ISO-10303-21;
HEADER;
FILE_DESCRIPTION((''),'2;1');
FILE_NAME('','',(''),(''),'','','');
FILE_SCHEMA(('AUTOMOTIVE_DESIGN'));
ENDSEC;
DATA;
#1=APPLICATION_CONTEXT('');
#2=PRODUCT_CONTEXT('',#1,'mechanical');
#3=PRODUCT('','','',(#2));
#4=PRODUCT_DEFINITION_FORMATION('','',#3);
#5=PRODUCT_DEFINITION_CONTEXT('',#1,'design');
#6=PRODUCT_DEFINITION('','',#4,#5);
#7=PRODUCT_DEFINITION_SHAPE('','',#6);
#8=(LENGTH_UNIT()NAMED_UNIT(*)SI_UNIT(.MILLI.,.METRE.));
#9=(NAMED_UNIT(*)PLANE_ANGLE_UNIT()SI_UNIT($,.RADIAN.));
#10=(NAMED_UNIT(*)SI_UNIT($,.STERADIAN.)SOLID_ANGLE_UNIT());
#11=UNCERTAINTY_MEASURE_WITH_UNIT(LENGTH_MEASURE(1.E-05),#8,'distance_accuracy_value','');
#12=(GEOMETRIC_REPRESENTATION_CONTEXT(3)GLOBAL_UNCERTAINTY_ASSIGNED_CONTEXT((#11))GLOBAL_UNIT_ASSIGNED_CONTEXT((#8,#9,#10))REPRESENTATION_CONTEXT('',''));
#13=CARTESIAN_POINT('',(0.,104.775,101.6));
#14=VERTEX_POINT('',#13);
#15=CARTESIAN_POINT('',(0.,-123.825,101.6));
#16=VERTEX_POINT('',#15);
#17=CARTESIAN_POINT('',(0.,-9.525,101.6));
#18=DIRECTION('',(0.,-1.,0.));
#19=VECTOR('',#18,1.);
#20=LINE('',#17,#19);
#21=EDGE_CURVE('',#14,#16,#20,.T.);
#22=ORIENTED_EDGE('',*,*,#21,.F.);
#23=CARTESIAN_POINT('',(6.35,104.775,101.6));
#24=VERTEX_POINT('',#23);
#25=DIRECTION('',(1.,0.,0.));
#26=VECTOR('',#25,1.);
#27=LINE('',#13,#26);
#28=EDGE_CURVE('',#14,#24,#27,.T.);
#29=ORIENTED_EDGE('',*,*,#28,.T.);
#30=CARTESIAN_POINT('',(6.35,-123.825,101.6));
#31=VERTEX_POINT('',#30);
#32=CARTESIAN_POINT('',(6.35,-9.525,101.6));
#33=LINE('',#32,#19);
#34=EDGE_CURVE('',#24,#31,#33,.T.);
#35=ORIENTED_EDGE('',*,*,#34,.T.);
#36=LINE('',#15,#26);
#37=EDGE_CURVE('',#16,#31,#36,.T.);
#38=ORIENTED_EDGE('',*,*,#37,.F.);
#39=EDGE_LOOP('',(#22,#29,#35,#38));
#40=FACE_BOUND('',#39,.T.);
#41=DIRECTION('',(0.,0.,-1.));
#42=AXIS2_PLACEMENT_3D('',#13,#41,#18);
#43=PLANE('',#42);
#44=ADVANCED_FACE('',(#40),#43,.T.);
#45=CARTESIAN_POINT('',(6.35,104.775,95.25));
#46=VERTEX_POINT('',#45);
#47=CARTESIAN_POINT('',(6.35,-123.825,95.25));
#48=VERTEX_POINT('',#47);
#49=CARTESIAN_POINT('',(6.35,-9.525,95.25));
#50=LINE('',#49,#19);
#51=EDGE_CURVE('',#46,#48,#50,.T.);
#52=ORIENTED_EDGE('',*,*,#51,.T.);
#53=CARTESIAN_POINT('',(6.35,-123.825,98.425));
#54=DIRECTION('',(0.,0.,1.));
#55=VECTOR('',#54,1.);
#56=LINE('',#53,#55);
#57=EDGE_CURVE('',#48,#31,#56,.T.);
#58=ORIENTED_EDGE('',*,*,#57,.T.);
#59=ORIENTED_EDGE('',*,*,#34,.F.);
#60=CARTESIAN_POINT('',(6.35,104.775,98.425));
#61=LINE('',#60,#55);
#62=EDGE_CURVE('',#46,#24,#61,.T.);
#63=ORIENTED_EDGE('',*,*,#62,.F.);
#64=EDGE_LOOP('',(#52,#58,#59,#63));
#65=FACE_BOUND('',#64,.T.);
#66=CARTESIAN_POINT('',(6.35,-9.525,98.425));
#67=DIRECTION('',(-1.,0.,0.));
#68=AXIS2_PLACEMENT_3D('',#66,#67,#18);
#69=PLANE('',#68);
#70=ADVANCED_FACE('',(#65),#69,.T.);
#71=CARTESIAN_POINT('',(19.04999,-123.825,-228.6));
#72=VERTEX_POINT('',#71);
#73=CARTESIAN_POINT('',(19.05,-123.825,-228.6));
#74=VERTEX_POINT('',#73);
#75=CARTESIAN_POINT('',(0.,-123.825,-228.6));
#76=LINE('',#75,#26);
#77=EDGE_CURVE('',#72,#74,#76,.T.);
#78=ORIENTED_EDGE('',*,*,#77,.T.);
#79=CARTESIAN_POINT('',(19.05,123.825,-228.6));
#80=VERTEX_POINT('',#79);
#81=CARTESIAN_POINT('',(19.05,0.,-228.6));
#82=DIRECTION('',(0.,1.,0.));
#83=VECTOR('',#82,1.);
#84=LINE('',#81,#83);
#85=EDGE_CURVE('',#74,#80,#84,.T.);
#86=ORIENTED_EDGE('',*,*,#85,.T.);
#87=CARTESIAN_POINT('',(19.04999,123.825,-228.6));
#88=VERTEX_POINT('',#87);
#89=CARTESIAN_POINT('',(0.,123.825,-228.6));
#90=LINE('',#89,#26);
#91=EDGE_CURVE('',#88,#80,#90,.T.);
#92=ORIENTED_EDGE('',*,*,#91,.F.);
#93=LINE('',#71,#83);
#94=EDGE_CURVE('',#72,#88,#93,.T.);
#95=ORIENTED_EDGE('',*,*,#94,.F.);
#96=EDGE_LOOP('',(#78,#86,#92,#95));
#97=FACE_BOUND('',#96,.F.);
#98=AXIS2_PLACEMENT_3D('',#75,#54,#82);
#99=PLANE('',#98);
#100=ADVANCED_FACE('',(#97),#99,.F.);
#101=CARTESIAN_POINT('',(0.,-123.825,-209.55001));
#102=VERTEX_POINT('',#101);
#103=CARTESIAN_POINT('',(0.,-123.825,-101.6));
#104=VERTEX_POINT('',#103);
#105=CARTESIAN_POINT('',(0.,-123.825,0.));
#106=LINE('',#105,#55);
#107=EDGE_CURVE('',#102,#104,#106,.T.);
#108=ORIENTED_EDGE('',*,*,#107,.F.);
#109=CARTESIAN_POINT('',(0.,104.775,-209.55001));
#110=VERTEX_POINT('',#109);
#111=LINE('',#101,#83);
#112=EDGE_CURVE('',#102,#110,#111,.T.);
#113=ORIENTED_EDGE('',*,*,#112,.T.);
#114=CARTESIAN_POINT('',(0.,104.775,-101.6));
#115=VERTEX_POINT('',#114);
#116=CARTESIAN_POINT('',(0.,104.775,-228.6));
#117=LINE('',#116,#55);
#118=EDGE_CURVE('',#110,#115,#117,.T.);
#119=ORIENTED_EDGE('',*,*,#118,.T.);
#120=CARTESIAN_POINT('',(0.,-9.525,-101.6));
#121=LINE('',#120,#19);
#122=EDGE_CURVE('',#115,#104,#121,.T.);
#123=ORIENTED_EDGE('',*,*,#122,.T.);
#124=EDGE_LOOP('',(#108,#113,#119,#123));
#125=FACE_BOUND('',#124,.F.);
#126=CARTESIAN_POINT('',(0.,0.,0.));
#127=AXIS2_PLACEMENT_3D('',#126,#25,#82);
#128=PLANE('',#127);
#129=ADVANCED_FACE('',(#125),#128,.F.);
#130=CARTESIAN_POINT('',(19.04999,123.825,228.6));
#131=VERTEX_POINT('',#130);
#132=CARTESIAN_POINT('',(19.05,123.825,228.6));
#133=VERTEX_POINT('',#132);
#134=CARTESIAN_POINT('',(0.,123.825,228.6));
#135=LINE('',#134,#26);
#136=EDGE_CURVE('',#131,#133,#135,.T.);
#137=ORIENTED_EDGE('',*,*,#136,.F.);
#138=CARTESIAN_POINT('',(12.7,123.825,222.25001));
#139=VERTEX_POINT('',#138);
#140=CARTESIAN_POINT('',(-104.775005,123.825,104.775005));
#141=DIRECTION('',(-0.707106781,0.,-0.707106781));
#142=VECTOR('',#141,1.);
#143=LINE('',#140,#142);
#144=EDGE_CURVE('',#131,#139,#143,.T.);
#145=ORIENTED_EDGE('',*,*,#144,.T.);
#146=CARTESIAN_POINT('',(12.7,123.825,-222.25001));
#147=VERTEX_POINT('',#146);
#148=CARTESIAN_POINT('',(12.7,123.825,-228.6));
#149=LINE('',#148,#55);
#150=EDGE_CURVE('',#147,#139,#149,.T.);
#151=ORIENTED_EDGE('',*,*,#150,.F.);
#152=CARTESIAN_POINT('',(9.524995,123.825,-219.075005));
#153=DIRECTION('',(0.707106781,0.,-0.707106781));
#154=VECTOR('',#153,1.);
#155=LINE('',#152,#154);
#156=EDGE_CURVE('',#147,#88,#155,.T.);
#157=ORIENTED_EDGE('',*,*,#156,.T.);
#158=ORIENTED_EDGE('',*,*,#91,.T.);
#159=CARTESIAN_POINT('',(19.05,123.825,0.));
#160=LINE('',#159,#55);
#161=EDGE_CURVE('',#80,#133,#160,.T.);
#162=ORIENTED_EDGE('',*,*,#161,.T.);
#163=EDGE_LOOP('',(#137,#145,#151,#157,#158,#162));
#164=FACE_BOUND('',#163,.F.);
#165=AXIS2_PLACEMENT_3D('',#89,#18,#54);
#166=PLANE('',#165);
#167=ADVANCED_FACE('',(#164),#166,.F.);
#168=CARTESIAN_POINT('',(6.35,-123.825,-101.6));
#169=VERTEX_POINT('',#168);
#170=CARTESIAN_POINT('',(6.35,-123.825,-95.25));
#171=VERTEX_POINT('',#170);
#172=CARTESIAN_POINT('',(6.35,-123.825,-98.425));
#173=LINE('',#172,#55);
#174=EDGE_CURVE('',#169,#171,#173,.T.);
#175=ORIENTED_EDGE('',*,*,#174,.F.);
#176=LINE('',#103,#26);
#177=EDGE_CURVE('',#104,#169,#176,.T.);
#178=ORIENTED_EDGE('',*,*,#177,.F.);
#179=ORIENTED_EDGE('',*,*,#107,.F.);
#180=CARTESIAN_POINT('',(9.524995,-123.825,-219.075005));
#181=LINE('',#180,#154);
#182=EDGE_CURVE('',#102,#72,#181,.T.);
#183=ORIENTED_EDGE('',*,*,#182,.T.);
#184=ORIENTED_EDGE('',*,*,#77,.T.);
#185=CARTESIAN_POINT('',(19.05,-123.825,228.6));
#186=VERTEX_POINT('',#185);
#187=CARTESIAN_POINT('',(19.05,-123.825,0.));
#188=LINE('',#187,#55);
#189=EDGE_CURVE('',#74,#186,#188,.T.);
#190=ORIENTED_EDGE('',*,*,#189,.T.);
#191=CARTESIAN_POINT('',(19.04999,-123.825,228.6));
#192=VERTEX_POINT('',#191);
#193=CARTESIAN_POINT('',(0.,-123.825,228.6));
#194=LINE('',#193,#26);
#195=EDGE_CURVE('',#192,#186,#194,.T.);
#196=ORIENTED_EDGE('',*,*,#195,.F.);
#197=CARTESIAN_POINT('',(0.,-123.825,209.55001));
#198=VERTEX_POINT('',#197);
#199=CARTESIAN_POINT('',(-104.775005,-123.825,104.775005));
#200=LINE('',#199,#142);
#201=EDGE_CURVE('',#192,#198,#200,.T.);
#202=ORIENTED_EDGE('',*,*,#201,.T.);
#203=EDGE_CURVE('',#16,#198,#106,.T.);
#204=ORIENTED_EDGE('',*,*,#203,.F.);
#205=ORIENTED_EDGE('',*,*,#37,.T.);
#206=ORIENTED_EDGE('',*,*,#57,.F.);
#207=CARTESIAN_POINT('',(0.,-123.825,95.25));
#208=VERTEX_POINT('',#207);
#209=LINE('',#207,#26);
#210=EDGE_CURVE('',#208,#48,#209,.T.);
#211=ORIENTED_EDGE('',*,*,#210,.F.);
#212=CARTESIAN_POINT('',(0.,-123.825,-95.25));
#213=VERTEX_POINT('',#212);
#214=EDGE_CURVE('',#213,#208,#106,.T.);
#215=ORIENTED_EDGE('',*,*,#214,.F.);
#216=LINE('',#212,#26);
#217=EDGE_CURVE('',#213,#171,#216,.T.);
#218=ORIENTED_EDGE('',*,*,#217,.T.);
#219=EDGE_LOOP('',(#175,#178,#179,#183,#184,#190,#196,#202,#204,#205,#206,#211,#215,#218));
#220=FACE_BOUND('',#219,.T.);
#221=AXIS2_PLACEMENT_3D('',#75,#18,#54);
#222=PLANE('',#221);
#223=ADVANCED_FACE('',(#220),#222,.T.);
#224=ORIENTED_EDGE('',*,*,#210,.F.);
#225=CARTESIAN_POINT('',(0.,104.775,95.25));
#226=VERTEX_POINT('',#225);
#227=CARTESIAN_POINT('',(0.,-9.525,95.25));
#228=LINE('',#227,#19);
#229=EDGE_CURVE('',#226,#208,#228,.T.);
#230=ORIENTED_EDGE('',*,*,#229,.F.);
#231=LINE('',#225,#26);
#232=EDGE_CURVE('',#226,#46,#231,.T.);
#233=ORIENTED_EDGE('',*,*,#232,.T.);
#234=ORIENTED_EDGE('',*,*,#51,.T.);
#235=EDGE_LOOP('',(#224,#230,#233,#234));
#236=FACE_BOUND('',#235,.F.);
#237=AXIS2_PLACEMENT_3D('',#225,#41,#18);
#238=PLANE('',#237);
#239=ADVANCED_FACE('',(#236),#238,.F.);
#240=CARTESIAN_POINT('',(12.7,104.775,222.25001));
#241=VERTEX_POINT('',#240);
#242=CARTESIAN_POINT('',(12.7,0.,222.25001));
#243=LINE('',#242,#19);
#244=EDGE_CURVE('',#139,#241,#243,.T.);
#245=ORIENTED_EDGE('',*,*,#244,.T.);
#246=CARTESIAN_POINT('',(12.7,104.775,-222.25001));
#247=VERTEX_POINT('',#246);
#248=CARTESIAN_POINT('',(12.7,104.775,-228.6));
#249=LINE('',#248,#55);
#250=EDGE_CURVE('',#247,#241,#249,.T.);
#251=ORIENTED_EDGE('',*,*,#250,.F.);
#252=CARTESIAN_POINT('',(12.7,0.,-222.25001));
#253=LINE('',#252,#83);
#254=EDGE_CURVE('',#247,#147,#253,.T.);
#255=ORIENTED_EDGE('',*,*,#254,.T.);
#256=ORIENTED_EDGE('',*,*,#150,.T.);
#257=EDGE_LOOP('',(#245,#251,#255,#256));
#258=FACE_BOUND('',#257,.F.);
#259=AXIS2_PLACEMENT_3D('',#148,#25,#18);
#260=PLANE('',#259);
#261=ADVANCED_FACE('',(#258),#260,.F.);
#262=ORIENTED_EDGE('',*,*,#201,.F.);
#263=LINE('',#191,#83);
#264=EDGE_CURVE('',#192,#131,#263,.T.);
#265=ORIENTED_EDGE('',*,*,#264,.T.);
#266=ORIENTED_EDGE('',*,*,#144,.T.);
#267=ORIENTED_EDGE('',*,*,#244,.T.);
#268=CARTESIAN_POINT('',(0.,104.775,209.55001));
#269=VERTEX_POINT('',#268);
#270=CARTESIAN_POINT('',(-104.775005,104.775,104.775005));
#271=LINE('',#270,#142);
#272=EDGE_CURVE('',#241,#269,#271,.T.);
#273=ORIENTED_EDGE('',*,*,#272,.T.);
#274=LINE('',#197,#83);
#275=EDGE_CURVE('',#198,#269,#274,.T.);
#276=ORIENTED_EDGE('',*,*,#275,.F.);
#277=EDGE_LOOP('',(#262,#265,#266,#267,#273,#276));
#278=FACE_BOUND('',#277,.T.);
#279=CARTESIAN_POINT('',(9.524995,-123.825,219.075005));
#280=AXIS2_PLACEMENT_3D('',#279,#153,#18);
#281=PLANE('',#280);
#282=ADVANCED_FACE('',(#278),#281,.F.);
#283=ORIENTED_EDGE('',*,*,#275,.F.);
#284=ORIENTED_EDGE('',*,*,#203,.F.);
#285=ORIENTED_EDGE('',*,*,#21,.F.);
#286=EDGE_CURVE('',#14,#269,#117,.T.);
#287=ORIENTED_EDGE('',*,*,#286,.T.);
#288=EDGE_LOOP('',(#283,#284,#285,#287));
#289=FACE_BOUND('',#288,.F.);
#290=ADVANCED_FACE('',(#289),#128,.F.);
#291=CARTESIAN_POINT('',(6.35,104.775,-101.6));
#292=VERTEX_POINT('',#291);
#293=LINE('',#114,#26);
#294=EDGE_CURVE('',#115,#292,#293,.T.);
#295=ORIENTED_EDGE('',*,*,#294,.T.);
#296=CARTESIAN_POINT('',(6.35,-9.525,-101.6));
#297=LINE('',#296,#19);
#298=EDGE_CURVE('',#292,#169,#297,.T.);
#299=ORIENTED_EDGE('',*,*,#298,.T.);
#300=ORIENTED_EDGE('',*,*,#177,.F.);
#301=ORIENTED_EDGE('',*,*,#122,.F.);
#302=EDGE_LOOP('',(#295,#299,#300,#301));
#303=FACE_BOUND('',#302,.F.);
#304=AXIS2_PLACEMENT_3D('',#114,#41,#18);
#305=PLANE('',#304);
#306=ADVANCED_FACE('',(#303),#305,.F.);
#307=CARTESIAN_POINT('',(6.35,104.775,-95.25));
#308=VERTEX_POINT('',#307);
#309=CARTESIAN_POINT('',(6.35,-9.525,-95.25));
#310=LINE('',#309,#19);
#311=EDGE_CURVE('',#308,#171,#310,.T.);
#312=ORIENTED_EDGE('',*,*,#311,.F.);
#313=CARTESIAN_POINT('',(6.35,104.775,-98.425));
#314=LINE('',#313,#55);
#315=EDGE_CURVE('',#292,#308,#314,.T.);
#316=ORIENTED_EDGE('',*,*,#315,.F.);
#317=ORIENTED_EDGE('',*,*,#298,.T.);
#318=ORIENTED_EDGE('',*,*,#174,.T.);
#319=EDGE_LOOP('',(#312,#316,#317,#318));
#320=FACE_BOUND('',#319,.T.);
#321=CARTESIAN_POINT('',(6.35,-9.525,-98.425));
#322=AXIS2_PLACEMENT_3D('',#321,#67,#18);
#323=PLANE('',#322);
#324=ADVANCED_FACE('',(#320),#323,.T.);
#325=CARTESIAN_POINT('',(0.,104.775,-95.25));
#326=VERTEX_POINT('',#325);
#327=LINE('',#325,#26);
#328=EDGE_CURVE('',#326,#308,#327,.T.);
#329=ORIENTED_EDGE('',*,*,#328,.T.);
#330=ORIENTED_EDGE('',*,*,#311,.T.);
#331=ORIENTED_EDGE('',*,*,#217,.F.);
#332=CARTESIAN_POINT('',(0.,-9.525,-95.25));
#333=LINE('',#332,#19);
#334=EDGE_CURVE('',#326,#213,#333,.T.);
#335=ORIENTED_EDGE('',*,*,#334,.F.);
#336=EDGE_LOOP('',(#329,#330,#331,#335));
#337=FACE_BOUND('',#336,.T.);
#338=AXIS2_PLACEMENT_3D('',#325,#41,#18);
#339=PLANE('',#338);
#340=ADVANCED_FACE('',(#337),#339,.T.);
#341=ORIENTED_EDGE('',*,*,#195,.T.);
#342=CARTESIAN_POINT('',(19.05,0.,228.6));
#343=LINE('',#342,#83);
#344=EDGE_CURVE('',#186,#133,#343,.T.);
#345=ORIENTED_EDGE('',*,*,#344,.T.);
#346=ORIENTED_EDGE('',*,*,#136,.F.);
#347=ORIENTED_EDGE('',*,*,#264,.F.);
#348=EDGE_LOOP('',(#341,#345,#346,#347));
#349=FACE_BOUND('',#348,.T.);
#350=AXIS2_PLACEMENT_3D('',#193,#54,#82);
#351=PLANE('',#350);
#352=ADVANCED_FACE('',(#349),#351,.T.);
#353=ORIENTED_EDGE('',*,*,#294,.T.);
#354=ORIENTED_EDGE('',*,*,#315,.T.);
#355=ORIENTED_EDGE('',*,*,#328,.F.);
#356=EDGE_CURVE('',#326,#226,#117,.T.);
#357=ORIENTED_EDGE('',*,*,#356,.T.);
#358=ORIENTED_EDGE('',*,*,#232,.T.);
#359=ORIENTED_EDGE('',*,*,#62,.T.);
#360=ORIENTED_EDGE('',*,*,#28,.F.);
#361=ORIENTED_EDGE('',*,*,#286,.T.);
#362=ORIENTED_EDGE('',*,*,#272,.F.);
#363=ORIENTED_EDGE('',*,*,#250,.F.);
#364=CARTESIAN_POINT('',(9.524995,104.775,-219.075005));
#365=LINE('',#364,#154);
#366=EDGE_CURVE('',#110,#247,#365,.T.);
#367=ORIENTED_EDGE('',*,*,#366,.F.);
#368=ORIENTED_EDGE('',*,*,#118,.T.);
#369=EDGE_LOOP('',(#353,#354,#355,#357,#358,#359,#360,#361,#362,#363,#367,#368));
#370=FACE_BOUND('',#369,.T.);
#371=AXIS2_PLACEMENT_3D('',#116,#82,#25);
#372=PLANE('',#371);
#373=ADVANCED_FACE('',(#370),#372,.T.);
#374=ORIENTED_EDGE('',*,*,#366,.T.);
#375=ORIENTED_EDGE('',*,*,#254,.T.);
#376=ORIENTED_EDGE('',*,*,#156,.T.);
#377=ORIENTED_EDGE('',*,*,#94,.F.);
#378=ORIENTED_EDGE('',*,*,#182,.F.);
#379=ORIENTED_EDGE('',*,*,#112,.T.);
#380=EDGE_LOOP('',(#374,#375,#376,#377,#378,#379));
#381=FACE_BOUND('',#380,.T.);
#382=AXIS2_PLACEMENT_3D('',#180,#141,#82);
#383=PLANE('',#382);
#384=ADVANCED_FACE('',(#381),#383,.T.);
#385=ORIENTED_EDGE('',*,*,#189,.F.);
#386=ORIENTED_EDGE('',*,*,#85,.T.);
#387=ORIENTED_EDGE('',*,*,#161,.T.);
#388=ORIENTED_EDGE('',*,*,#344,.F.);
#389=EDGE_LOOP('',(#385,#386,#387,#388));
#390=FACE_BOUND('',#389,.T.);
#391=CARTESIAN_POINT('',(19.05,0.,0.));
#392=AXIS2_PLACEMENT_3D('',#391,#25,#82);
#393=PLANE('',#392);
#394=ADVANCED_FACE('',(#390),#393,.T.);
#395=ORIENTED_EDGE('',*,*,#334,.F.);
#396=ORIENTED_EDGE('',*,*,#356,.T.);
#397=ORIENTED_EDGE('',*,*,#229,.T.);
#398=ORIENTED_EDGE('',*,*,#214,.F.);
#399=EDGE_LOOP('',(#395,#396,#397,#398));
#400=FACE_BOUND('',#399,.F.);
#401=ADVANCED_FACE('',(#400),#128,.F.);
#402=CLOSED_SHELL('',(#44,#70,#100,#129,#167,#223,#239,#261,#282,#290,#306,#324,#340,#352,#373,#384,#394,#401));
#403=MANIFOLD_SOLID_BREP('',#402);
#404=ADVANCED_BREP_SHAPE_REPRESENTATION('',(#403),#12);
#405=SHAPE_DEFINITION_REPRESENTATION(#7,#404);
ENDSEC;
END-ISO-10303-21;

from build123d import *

# Parameters (mm, degrees)
F0_W     = 247.65
F0_H     = 457.2
F1_DEPTH = 19.05
F2_W     = 12.7
F2_H     = 19.05
F3_DEPTH = 457.201
F4_SIZE  = 19.04999
F5_SIZE  = 19.04999
F6_W     = 228.6
F6_H     = 6.35
F7_DEPTH = 6.35


# Not quite as in the source:
# - a fillet or chamfer is up to 0.001 mm smaller than in the source, because OpenCascade refuses the exact size


with BuildPart() as f1:
    # F0 (on Right) → F1 (new body)
    with BuildSketch(Plane.YZ):
        Rectangle(F0_W, F0_H)
    extrude(amount=F1_DEPTH)

    # F2 (on face) → F3 (cut, through all)
    with BuildSketch(Plane(origin=(0, 0, -228.6), x_dir=(1, 0, 0), z_dir=(0, 0, -1))):
        with Locations((6.35, -114.3)):
            Rectangle(F2_W, F2_H)
    extrude(amount=-F3_DEPTH, mode=Mode.SUBTRACT)

    # F4 (size 19.05 in the source; OpenCascade refuses exactly that, so slightly less here)
    f4_edges = [f1.edges().sort_by_distance(p)[0] for p in [
        (0, -9.525, 228.6),
    ]]
    chamfer(f4_edges, length=F4_SIZE)

    # F5 (size 19.05 in the source; OpenCascade refuses exactly that, so slightly less here)
    f5_edges = [f1.edges().sort_by_distance(p)[0] for p in [
        (0, -9.525, -228.6),
    ]]
    chamfer(f5_edges, length=F5_SIZE)

    # F6 (on face) → F7 (cut)
    with BuildSketch(Plane(origin=(0, 0, 0), x_dir=(0, -1, 0), z_dir=(-1, 0, 0))):
        with Locations((9.525, -98.425)):
            Rectangle(F6_W, F6_H)
        with Locations((9.525, 98.425)):
            Rectangle(F6_W, F6_H)
    extrude(amount=-F7_DEPTH, mode=Mode.SUBTRACT)


solid = f1.part
